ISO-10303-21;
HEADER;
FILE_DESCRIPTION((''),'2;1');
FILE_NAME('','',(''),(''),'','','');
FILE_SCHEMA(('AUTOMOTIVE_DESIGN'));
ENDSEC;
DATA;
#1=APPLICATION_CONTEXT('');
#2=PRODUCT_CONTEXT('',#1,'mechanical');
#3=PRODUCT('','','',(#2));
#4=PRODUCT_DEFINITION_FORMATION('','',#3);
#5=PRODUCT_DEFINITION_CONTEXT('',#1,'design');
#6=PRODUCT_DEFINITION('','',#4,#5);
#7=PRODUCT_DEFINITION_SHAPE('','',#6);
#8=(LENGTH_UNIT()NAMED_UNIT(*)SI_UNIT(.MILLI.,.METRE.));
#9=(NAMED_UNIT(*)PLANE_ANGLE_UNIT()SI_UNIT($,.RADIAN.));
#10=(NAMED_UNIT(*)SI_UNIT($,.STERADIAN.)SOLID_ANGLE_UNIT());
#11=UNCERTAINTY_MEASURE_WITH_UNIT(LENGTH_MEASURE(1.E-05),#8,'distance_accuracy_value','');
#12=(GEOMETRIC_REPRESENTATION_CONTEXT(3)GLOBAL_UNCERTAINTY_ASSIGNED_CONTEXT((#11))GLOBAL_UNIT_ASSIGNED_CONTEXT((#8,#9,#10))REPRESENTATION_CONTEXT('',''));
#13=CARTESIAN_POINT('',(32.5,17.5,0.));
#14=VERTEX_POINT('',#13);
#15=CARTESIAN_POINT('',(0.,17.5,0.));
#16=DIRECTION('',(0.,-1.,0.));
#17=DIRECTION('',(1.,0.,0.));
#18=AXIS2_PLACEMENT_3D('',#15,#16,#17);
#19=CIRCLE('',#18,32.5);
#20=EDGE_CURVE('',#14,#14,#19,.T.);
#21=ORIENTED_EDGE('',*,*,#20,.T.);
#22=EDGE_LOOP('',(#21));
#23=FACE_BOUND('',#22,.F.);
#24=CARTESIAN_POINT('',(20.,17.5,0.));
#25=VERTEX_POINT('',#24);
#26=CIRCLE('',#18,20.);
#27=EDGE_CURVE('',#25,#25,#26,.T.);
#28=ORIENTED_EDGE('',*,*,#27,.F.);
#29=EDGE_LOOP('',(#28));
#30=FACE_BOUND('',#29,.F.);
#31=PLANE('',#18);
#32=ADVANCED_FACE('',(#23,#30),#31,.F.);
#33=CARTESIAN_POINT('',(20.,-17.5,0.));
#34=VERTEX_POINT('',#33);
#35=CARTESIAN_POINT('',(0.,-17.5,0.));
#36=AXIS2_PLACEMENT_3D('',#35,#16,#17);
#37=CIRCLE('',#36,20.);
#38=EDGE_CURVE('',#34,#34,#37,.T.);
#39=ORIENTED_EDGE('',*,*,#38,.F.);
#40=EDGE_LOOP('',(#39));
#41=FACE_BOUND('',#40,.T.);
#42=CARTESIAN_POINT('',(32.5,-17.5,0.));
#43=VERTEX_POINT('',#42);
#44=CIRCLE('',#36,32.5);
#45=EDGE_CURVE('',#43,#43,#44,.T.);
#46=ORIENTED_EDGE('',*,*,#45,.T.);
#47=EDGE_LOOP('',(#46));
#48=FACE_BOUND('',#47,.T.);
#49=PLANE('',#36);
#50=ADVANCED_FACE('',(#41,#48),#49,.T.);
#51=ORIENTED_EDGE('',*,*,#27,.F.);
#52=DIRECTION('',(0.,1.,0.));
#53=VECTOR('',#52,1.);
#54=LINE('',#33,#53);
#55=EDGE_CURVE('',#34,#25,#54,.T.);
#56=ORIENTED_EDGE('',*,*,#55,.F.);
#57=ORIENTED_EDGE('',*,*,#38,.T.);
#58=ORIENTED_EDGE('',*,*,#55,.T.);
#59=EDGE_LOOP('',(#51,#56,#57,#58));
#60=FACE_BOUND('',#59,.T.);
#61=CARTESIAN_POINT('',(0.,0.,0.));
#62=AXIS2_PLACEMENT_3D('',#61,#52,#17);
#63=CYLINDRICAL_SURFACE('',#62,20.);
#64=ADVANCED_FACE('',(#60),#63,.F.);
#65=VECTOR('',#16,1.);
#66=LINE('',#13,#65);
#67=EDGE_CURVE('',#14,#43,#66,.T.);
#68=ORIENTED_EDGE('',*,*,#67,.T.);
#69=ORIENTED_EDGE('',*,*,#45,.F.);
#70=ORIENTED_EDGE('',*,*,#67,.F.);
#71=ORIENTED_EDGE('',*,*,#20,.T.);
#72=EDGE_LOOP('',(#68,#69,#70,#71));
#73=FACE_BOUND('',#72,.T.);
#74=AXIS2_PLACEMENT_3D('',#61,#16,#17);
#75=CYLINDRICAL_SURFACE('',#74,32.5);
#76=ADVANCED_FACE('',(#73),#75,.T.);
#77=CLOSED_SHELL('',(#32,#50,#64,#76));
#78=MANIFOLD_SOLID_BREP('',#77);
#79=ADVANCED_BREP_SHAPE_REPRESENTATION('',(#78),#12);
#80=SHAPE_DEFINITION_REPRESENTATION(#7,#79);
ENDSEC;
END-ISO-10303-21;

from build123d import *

# Parameters (mm, degrees)
F0_R     = 32.5
F0_R_2   = 20
F1_DEPTH = 17.5


# Not quite as in the source:
# - the program builds the solid bodies; features that only make, move or delete a surface that nothing else refers to are left out


with BuildPart() as f1:
    # F0 (on Front) → F1 (new body, symmetric)
    with BuildSketch(Plane.XZ):
        Circle(F0_R)
        Circle(F0_R_2, mode=Mode.SUBTRACT)
    extrude(amount=F1_DEPTH, both=True)


solid = f1.part
